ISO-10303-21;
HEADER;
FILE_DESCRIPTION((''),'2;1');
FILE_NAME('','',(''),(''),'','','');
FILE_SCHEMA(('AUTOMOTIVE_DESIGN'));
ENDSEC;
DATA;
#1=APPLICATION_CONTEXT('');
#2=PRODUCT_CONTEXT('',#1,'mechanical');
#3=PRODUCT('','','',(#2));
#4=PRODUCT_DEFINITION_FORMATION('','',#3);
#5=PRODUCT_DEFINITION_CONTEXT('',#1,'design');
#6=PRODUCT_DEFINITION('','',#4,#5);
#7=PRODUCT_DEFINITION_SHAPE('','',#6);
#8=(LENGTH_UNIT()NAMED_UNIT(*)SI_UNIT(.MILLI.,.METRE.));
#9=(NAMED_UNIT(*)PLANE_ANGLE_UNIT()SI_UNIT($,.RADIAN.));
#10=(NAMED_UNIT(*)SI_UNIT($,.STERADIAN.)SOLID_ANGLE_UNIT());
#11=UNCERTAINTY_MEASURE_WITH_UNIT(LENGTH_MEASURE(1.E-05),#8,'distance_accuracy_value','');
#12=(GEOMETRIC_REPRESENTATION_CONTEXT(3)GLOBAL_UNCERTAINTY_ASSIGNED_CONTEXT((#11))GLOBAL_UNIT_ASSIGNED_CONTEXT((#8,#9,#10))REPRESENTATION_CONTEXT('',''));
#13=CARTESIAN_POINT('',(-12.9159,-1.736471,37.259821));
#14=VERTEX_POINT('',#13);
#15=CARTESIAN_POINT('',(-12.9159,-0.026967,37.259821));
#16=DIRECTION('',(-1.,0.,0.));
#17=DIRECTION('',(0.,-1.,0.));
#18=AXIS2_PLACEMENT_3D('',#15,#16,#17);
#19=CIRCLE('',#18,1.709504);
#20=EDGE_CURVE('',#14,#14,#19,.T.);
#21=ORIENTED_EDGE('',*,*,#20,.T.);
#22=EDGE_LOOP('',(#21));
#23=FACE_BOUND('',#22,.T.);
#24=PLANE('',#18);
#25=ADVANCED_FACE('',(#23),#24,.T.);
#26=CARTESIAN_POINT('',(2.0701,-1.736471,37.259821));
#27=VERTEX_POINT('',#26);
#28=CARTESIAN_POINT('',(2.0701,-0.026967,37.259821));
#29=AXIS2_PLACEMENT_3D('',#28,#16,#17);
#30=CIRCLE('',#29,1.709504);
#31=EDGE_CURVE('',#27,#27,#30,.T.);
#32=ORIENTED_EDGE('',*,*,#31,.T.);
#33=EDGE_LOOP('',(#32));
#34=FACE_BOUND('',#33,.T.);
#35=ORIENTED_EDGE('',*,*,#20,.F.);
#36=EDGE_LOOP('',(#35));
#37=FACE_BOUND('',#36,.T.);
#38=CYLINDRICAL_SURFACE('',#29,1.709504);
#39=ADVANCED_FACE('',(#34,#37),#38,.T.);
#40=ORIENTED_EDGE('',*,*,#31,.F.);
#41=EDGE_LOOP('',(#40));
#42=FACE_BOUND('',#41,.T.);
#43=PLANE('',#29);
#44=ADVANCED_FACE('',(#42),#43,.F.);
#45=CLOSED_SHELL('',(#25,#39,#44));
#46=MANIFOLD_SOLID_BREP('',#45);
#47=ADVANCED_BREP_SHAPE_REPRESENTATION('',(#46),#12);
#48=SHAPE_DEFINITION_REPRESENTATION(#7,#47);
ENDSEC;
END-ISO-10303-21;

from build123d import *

# Parameters (mm, degrees)
SURFACE_EXTRUDE4_START     = -1.778
SURFACE_EXTRUDE4_OUTLINE_R = 1.709503837
SURFACE_EXTRUDE4_DEPTH     = 14.986


# Read off the part's stored shape, not the designer's step: Surface-Extrude4
with BuildPart() as part:
    # Surface-Extrude4 outline → Surface-Extrude4 (new body)
    with BuildSketch(Plane.ZY.offset(-0.2921).offset(SURFACE_EXTRUDE4_START)):
        with Locations((37.259820513, -0.026967113)):
            Circle(SURFACE_EXTRUDE4_OUTLINE_R)
    extrude(amount=SURFACE_EXTRUDE4_DEPTH)


solid = part.part
